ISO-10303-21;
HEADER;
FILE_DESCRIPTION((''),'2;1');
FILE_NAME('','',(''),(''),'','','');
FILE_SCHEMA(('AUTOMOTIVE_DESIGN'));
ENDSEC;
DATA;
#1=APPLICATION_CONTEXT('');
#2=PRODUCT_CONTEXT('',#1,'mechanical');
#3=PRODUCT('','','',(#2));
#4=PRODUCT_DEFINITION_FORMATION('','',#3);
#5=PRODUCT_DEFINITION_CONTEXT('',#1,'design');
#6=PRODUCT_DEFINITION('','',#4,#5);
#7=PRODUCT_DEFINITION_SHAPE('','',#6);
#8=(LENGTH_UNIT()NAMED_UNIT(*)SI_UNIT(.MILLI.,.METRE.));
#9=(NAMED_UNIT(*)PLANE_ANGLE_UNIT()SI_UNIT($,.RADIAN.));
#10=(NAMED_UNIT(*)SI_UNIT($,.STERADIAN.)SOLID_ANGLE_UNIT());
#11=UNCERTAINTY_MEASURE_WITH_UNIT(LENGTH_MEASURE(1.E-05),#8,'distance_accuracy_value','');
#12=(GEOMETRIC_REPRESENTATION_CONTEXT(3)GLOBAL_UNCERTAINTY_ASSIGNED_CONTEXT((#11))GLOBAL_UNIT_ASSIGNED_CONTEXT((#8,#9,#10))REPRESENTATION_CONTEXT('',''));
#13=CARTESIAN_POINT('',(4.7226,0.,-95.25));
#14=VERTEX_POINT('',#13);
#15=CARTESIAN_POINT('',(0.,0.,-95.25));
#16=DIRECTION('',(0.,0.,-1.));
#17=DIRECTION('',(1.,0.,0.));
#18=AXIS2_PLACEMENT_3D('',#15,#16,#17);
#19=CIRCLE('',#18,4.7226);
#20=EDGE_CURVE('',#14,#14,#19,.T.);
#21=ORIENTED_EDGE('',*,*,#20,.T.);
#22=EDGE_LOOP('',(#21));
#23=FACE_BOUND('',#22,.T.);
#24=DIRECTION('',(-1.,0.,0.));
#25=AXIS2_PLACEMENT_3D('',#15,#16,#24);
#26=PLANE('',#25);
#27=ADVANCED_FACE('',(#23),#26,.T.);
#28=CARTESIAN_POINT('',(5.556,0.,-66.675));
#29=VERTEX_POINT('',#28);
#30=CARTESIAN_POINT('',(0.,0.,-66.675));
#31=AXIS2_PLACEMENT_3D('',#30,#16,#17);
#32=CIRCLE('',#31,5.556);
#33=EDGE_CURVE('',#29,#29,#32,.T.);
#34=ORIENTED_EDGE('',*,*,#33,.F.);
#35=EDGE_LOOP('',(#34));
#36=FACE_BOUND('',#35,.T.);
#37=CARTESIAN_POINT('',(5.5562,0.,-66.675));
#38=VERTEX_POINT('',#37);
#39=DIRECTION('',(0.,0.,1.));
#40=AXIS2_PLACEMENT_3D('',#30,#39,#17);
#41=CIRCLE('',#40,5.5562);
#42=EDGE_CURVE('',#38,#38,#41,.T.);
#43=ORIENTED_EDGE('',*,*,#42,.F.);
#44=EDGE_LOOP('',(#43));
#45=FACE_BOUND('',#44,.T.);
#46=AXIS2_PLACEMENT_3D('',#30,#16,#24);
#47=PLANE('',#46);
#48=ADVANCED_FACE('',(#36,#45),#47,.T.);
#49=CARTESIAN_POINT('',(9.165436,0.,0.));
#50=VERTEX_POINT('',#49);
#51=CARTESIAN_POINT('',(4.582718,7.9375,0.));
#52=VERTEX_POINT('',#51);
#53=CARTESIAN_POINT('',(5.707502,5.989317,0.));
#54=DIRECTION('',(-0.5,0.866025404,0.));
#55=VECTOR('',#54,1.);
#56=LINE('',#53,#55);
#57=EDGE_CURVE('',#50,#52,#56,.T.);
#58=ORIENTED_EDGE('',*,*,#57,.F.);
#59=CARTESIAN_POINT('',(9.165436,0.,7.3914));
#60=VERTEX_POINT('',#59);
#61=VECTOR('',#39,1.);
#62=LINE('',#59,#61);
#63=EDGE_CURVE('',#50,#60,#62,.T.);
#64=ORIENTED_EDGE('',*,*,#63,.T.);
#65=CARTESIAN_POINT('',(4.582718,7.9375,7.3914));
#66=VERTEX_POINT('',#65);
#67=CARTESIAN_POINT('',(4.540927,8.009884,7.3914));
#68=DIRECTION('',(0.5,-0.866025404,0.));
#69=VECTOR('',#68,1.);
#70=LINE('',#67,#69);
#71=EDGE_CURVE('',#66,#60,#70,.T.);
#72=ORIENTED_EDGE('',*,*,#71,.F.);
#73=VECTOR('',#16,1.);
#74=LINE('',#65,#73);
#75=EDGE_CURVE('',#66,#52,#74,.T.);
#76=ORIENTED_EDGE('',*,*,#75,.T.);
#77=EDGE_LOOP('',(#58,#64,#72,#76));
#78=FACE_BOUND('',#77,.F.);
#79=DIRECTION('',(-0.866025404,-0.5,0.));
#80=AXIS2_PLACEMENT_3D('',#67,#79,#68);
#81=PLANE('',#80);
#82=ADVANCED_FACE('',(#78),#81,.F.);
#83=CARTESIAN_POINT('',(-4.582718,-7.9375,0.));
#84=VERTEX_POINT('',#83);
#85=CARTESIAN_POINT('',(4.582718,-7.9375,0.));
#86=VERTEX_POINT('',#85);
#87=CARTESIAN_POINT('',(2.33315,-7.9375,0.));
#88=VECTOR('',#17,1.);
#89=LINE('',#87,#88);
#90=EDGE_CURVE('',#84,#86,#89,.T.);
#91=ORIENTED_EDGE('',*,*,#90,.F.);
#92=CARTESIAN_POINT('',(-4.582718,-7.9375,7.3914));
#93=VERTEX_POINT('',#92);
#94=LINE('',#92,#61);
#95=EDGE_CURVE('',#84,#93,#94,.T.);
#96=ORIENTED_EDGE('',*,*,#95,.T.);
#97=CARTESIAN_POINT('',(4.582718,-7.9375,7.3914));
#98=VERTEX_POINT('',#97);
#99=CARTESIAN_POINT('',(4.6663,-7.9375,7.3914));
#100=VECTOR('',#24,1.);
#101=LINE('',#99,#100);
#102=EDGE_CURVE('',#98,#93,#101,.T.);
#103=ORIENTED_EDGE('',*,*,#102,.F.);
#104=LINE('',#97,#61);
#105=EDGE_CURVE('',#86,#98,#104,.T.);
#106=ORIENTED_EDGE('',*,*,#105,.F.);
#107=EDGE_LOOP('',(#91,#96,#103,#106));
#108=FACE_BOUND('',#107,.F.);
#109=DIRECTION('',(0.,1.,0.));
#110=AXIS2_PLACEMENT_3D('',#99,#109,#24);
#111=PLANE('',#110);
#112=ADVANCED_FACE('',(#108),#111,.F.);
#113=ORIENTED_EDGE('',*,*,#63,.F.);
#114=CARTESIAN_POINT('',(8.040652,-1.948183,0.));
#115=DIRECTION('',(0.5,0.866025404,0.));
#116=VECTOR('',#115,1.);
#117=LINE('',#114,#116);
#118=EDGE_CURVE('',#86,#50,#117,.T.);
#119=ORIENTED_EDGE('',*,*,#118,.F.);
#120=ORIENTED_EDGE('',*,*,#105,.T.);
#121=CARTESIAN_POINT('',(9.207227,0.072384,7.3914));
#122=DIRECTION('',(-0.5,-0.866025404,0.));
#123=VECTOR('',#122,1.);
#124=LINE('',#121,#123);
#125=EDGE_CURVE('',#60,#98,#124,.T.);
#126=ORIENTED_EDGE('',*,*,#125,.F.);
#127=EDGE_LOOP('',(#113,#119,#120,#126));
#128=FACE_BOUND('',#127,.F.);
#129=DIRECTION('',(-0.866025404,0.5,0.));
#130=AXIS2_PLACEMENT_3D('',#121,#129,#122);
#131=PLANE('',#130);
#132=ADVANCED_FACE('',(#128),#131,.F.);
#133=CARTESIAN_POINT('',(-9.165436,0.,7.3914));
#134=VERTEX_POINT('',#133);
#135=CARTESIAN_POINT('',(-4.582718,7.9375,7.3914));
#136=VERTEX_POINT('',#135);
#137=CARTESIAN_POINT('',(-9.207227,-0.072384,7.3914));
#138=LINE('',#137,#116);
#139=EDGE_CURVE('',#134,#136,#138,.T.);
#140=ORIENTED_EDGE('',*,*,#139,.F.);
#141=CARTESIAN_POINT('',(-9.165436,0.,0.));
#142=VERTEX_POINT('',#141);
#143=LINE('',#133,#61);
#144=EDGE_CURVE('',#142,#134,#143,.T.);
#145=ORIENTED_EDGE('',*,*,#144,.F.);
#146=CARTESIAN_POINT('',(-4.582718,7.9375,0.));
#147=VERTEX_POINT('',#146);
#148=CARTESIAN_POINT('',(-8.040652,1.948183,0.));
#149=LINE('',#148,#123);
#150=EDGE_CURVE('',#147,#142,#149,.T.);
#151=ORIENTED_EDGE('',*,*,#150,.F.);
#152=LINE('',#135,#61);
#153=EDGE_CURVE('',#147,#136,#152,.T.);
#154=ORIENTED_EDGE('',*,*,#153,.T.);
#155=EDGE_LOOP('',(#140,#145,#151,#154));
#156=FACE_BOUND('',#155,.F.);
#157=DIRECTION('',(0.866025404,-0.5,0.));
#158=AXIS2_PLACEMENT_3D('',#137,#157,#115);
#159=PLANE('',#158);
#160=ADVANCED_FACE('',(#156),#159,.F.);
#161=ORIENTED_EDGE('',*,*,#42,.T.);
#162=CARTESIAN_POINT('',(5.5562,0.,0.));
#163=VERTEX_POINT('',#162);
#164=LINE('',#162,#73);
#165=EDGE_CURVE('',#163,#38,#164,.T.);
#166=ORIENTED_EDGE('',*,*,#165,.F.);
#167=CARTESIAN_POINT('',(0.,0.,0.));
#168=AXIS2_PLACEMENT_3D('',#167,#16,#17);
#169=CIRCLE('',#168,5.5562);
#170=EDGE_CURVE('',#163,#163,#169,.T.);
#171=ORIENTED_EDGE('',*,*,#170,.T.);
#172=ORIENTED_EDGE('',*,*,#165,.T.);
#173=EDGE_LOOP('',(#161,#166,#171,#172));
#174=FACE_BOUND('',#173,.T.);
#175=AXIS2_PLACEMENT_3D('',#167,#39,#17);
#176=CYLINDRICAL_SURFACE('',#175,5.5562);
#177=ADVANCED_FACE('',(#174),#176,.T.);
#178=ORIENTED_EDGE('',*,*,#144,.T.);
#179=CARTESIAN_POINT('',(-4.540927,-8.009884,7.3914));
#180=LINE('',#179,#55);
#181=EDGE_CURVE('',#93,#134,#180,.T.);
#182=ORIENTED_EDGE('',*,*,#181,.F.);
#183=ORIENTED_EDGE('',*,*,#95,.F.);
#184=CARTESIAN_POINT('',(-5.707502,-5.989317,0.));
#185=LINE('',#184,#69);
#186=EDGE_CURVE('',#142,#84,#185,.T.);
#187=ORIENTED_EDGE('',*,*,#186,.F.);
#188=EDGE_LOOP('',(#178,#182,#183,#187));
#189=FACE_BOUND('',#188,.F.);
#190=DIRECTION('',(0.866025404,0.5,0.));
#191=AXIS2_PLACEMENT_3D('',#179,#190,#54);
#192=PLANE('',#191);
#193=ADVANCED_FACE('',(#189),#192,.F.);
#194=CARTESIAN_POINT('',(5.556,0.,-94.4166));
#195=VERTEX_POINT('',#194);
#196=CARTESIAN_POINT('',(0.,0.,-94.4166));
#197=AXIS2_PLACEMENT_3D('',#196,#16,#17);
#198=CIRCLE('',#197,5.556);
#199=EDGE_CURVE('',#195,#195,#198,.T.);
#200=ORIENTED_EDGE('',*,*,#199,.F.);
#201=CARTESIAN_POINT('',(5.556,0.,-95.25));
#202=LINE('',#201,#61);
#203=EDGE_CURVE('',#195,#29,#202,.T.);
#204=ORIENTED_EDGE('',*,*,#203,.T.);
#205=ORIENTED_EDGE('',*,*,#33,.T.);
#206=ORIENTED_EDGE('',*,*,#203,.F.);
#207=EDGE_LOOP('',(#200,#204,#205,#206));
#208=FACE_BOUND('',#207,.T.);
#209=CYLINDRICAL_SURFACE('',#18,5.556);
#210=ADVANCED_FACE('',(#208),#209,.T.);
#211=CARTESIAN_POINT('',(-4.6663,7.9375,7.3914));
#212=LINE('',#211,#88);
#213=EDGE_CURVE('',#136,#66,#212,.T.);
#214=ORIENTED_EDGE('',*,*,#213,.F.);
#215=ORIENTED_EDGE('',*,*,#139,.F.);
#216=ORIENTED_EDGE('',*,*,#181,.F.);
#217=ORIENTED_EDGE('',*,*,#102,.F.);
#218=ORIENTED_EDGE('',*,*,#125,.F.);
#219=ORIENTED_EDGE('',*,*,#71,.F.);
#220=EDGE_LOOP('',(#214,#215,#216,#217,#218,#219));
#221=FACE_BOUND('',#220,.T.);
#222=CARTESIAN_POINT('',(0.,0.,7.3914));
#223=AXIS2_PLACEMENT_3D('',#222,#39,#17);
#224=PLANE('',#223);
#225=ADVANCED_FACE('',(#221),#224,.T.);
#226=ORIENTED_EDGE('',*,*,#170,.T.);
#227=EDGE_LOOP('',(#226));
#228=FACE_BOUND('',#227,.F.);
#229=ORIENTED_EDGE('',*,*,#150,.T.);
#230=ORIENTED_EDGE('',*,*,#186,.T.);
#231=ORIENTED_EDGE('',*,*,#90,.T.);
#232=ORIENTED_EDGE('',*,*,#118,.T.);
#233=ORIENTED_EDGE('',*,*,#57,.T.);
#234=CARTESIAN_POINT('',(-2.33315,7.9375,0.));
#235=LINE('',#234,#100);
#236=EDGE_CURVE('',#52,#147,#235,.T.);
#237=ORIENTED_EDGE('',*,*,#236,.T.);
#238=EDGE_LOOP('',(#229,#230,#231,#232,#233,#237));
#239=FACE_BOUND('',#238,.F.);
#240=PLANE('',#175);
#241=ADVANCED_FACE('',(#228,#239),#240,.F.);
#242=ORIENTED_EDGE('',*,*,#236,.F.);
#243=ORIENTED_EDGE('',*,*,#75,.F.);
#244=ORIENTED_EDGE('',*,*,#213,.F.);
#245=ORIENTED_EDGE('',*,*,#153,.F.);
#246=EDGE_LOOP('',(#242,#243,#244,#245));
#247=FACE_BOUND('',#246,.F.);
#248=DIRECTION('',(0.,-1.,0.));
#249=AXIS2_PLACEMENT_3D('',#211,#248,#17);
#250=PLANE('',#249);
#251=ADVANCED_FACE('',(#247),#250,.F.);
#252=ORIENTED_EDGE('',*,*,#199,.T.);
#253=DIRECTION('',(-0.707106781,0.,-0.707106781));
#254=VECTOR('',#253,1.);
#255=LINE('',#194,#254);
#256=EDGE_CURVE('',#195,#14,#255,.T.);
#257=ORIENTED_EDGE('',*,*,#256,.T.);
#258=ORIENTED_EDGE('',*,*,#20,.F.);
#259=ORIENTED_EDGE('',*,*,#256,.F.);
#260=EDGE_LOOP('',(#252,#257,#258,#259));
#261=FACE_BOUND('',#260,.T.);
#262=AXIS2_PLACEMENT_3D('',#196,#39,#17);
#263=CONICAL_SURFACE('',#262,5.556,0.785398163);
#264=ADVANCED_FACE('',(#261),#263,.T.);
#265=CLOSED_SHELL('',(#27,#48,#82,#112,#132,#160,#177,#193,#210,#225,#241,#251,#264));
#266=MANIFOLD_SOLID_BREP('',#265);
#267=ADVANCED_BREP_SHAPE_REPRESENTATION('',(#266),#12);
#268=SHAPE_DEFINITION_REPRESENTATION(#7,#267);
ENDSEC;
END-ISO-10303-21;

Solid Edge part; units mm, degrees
sketch "Sketch1" plane through (0, 0, 0) normal (0, 0, 1) x (1, 0, 0)
  circle A0 centre (0, 0) radius 9.2075
  dimension "D1" = 18.415
extrude "Protrusion1" add sketch "Sketch1" along normal blind 7.3914
sketch "Sketch2" plane through (0, 0, 0) normal (0, 0, -1) x (1, 0, 0)
  circle A0 centre (0, 0) radius 5.5562
extrude "Protrusion2" add sketch "Sketch2" along normal blind 95.25
sketch "Sketch3" plane through (0, 0, -95.25) normal (0, 0, -1) x (1, 0, 0)
  circle A0 centre (0, 0) radius 5.556
extrude "Cutout1" cut sketch "Sketch3" against normal blind 28.575 flip side to cut
chamfer "Chamfer_1" distance 0.8334 angle 45 1 edges at (-5.556, 0, -95.25)
sketch "Sketch4" plane through (0, 0, 7.3914) normal (0, 0, 1) x (1, 0, 0)
  line L0 (-4.6663, 7.9375) -> (4.6663, 7.9375)
  dimension "D1" = 15.875
extrude "Cutout2" cut sketch "Sketch4" against normal up to next material side at (0, 7.9875, 7.3914)
pattern_circular "Pattern1" count 6 over 360 about axis through (0, 0, 7.3914) along (0, 0, 1) of "Cutout2"
properties part number "24100096"
